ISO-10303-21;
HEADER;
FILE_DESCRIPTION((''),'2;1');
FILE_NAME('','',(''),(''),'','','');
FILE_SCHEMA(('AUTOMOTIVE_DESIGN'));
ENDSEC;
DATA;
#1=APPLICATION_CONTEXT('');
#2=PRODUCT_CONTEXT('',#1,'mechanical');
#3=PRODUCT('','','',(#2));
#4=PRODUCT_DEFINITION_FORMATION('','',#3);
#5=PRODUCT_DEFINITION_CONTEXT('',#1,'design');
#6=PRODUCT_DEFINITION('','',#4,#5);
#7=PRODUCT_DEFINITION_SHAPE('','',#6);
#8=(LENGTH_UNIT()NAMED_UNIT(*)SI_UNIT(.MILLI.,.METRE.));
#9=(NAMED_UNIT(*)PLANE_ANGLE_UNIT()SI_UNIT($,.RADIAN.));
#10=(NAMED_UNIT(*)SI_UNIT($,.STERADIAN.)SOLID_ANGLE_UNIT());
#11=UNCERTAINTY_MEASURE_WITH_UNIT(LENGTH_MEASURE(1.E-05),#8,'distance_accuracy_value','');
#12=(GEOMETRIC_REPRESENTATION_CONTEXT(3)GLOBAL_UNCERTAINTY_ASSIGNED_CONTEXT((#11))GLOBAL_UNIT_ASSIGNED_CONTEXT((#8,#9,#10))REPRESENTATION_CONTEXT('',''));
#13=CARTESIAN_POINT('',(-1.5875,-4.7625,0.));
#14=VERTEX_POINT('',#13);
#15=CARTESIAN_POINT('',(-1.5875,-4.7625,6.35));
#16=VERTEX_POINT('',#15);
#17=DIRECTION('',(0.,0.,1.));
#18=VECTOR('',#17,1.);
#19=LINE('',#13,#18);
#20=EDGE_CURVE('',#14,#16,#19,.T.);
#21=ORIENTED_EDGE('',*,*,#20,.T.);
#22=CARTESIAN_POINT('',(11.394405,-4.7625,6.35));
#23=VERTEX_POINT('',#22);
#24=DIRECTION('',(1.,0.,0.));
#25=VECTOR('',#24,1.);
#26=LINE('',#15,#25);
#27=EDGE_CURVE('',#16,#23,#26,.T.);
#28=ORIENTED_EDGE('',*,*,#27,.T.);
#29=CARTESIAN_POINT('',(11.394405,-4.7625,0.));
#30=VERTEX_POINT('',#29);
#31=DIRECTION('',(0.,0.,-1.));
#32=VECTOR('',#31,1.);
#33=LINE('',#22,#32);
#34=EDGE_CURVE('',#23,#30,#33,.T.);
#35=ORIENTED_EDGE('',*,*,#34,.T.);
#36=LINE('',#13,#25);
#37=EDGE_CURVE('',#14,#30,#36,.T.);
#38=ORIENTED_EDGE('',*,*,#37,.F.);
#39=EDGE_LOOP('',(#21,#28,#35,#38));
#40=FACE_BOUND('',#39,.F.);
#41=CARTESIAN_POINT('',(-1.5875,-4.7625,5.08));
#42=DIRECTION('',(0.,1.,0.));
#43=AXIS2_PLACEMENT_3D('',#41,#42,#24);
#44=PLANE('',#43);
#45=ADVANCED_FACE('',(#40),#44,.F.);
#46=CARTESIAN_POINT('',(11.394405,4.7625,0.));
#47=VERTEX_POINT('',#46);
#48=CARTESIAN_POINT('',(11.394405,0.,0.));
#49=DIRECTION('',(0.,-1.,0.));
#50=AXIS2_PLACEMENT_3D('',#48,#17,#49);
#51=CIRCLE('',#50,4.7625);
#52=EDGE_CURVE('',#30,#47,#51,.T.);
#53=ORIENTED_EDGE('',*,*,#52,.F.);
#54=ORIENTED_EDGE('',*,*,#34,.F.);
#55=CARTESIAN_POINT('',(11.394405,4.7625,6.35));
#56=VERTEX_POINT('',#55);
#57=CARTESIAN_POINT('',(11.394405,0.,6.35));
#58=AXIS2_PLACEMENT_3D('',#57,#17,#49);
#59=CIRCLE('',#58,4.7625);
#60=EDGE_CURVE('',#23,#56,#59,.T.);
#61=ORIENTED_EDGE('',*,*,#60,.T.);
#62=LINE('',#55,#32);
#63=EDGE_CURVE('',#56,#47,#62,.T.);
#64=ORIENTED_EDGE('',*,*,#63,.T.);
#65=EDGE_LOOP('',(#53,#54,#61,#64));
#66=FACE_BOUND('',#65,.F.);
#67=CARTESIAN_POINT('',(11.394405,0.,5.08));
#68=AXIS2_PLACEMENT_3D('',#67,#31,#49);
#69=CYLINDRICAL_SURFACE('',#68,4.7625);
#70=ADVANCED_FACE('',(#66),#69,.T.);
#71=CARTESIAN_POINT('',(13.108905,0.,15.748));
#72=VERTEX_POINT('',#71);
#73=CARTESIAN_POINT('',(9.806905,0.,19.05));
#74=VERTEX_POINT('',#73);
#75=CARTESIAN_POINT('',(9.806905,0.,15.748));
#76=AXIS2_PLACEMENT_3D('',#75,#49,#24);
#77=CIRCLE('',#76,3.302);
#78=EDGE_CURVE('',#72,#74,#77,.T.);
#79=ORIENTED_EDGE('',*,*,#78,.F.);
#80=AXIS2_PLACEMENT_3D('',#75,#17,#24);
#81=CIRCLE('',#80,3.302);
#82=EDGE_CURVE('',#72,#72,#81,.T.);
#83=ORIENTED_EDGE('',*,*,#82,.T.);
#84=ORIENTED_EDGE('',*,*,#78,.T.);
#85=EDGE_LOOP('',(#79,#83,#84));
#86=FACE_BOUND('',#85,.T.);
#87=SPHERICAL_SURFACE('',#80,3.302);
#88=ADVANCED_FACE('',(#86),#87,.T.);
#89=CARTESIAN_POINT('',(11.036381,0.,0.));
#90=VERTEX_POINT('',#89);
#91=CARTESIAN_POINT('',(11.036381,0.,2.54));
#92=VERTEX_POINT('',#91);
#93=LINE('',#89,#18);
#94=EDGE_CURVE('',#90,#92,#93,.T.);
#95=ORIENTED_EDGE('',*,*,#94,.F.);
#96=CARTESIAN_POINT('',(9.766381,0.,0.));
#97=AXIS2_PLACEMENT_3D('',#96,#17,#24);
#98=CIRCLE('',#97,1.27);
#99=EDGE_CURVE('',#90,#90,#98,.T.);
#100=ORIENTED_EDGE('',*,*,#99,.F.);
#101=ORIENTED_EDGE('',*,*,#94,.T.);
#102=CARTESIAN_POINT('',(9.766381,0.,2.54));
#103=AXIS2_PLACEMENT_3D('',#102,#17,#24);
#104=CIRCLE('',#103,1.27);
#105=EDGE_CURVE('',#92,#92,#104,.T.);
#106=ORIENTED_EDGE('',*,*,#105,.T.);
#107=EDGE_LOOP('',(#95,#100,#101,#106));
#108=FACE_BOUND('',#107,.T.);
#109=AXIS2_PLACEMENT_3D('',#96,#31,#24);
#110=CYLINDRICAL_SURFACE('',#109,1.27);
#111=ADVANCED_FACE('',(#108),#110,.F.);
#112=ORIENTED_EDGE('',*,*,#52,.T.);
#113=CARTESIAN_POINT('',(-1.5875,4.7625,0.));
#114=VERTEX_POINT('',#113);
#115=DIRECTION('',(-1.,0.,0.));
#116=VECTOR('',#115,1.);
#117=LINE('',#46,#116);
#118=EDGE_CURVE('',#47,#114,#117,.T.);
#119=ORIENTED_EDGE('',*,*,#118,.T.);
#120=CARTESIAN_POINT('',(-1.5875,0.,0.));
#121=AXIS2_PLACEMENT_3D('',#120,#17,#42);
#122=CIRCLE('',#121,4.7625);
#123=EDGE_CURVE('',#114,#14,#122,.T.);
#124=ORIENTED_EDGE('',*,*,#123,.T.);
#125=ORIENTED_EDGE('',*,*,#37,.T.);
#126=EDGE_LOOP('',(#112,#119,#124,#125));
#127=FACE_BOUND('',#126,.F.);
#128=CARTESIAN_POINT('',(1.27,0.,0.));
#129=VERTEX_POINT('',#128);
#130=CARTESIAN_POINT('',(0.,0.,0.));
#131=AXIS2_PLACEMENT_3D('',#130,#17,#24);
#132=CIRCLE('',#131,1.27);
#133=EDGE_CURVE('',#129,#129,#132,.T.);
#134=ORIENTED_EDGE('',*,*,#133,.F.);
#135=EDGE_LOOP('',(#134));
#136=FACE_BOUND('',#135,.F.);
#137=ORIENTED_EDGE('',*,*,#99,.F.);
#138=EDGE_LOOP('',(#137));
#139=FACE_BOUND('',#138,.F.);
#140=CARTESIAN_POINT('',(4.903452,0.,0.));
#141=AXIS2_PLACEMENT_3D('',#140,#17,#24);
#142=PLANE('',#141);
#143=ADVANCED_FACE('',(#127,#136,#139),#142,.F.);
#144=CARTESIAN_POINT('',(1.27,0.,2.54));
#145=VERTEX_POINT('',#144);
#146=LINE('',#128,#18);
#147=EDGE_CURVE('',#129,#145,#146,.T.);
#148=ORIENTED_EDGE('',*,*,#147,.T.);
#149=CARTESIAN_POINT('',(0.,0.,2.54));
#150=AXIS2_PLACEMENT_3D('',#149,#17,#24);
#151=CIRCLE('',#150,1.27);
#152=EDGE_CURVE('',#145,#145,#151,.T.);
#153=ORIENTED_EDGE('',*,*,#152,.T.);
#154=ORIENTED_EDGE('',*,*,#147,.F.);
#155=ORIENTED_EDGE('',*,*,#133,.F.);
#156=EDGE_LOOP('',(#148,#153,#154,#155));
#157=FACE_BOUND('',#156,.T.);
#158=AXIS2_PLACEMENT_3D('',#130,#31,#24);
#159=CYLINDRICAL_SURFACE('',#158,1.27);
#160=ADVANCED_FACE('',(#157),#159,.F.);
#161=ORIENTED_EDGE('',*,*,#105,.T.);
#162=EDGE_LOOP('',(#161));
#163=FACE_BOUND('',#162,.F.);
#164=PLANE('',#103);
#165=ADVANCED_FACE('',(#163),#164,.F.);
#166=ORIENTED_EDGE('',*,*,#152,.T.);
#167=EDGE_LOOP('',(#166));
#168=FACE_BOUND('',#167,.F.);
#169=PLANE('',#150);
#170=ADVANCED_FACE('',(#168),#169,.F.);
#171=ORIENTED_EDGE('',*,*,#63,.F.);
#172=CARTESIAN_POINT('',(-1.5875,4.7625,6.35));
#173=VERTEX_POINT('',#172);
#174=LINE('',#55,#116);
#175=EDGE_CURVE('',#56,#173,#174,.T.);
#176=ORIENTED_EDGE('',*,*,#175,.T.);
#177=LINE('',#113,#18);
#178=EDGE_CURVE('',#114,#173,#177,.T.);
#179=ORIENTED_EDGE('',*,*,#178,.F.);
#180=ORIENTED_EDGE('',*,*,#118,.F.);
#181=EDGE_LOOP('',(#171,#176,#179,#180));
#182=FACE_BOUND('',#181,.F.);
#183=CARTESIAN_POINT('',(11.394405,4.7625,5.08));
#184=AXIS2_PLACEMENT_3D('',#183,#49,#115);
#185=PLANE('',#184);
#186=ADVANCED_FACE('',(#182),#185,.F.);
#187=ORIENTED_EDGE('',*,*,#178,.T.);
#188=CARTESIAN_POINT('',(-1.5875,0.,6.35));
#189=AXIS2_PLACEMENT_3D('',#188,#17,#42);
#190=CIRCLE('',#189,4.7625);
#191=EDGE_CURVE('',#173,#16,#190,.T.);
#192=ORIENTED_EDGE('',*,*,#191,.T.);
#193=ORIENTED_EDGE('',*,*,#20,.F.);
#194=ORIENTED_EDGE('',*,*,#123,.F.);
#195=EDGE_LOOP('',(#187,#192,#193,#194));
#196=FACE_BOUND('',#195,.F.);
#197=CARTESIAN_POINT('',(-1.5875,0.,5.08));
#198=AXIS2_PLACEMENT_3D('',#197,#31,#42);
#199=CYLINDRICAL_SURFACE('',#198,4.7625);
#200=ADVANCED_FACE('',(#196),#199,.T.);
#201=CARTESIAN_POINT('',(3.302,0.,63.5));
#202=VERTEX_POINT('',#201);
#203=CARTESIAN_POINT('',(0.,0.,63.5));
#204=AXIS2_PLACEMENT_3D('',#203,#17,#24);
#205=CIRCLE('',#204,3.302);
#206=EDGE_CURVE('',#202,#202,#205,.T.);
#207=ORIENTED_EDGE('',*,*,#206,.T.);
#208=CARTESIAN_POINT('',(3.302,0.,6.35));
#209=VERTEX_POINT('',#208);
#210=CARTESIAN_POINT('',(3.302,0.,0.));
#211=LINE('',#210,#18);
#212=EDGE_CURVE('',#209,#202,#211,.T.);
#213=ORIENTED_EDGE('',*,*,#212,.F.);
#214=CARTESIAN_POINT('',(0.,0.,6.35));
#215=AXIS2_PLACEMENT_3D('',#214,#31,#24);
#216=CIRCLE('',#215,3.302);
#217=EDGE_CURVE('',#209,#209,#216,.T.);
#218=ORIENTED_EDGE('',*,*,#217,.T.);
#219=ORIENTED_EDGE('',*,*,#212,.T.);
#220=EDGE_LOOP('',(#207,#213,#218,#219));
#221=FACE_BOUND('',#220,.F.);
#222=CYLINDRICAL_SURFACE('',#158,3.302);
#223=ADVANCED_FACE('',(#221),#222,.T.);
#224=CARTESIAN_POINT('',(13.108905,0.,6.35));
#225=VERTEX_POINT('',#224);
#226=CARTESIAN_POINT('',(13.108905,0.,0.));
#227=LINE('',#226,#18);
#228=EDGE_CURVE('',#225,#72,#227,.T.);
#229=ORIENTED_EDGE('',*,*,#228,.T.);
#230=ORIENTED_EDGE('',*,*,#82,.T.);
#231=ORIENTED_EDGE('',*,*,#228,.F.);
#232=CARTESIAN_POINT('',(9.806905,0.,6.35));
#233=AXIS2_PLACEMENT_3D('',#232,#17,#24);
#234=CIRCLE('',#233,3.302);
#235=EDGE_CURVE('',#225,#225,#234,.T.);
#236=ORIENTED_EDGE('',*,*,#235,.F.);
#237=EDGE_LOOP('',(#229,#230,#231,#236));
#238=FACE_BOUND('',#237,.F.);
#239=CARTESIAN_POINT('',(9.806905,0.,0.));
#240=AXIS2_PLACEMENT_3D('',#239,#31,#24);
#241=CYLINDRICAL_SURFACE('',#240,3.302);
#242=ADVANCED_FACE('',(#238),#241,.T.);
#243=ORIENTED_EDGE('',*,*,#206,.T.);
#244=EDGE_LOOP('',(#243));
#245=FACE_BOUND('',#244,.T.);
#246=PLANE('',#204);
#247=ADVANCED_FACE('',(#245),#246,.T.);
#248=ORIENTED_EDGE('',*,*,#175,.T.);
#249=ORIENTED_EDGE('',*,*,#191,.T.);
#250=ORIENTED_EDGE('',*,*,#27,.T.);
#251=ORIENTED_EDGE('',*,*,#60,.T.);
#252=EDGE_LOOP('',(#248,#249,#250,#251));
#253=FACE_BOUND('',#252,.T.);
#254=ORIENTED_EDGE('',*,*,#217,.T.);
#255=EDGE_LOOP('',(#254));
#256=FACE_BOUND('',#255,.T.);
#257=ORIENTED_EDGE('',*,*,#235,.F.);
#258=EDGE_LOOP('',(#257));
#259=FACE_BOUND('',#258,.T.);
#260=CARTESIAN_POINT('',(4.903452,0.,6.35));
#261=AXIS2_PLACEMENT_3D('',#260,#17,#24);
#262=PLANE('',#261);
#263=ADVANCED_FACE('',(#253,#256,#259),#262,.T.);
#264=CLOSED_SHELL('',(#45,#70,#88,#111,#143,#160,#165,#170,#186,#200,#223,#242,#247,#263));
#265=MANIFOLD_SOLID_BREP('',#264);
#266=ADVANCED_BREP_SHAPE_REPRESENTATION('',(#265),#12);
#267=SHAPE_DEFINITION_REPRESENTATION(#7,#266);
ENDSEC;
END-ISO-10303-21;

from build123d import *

# Parameters (mm, degrees)
F1_DEPTH = 63.5
F0_R     = 3.302
F2_DEPTH = 19.05
F3_DEPTH = 5.08
F4_DEPTH = 1.27
F5_R     = 3.302
F6_R     = 1.27
F7_DEPTH = 2.54


with BuildPart() as f1:
    # F0 (on Top) → F1 (new body)
    with BuildSketch(Plane.XY):
        with BuildLine():
            ThreePointArc((-3.302, 0), (0, -3.302), (3.302, 0))
            ThreePointArc((3.302, 0), (0, 3.302), (-3.302, 0))
        make_face()
    extrude(amount=F1_DEPTH)



with BuildPart() as f2:
    # F0 (on Top) → F2 (new body)
    with BuildSketch(Plane.XY):
        with Locations((9.8069049418, 0)):
            Circle(F0_R)
    extrude(amount=F2_DEPTH)


with BuildPart() as f1_1:
    add(f1.part)

    add(f2.part)  # F3 merges F2
    # F0 (on Top) → F3 (join)
    with BuildSketch(Plane.XY):
        with BuildLine():
            Line((11.3944049418, 4.7625), (-1.5875, 4.7625))
            ThreePointArc((-1.5875, 4.7625), (-6.35, 0), (-1.5875, -4.7625))
            Line((-1.5875, -4.7625), (11.3944049418, -4.7625))
            ThreePointArc((11.3944049418, -4.7625), (16.1569049418, 0), (11.3944049418, 4.7625))
        make_face()
        with BuildLine():
            ThreePointArc((-3.302, 0), (0, 3.302), (3.302, 0))
            ThreePointArc((3.302, 0), (0, -3.302), (-3.302, 0))
        make_face(mode=Mode.SUBTRACT)
        with Locations((9.8069049418, 0)):
            Circle(F0_R, mode=Mode.SUBTRACT)
    extrude(amount=F3_DEPTH)

    # F4 (add): a face of the model
    f4_faces = [f1_1.faces().sort_by_distance(p)[0] for p in [
        (4.9034524709, 0, 5.08),
    ]]
    extrude(f4_faces, amount=F4_DEPTH)

    # F5
    f5_edges = [f1_1.edges().sort_by_distance(p)[0] for p in [
        (6.504905, 0, 19.05),
    ]]
    fillet(f5_edges, radius=F5_R)

    # F6 (on face) → F7 (cut)
    with BuildSketch(Plane.XY):
        Circle(F6_R)
        with Locations((9.7663812339, 0)):
            Circle(F6_R)
    extrude(amount=F7_DEPTH, mode=Mode.SUBTRACT)


solid = f1_1.part
